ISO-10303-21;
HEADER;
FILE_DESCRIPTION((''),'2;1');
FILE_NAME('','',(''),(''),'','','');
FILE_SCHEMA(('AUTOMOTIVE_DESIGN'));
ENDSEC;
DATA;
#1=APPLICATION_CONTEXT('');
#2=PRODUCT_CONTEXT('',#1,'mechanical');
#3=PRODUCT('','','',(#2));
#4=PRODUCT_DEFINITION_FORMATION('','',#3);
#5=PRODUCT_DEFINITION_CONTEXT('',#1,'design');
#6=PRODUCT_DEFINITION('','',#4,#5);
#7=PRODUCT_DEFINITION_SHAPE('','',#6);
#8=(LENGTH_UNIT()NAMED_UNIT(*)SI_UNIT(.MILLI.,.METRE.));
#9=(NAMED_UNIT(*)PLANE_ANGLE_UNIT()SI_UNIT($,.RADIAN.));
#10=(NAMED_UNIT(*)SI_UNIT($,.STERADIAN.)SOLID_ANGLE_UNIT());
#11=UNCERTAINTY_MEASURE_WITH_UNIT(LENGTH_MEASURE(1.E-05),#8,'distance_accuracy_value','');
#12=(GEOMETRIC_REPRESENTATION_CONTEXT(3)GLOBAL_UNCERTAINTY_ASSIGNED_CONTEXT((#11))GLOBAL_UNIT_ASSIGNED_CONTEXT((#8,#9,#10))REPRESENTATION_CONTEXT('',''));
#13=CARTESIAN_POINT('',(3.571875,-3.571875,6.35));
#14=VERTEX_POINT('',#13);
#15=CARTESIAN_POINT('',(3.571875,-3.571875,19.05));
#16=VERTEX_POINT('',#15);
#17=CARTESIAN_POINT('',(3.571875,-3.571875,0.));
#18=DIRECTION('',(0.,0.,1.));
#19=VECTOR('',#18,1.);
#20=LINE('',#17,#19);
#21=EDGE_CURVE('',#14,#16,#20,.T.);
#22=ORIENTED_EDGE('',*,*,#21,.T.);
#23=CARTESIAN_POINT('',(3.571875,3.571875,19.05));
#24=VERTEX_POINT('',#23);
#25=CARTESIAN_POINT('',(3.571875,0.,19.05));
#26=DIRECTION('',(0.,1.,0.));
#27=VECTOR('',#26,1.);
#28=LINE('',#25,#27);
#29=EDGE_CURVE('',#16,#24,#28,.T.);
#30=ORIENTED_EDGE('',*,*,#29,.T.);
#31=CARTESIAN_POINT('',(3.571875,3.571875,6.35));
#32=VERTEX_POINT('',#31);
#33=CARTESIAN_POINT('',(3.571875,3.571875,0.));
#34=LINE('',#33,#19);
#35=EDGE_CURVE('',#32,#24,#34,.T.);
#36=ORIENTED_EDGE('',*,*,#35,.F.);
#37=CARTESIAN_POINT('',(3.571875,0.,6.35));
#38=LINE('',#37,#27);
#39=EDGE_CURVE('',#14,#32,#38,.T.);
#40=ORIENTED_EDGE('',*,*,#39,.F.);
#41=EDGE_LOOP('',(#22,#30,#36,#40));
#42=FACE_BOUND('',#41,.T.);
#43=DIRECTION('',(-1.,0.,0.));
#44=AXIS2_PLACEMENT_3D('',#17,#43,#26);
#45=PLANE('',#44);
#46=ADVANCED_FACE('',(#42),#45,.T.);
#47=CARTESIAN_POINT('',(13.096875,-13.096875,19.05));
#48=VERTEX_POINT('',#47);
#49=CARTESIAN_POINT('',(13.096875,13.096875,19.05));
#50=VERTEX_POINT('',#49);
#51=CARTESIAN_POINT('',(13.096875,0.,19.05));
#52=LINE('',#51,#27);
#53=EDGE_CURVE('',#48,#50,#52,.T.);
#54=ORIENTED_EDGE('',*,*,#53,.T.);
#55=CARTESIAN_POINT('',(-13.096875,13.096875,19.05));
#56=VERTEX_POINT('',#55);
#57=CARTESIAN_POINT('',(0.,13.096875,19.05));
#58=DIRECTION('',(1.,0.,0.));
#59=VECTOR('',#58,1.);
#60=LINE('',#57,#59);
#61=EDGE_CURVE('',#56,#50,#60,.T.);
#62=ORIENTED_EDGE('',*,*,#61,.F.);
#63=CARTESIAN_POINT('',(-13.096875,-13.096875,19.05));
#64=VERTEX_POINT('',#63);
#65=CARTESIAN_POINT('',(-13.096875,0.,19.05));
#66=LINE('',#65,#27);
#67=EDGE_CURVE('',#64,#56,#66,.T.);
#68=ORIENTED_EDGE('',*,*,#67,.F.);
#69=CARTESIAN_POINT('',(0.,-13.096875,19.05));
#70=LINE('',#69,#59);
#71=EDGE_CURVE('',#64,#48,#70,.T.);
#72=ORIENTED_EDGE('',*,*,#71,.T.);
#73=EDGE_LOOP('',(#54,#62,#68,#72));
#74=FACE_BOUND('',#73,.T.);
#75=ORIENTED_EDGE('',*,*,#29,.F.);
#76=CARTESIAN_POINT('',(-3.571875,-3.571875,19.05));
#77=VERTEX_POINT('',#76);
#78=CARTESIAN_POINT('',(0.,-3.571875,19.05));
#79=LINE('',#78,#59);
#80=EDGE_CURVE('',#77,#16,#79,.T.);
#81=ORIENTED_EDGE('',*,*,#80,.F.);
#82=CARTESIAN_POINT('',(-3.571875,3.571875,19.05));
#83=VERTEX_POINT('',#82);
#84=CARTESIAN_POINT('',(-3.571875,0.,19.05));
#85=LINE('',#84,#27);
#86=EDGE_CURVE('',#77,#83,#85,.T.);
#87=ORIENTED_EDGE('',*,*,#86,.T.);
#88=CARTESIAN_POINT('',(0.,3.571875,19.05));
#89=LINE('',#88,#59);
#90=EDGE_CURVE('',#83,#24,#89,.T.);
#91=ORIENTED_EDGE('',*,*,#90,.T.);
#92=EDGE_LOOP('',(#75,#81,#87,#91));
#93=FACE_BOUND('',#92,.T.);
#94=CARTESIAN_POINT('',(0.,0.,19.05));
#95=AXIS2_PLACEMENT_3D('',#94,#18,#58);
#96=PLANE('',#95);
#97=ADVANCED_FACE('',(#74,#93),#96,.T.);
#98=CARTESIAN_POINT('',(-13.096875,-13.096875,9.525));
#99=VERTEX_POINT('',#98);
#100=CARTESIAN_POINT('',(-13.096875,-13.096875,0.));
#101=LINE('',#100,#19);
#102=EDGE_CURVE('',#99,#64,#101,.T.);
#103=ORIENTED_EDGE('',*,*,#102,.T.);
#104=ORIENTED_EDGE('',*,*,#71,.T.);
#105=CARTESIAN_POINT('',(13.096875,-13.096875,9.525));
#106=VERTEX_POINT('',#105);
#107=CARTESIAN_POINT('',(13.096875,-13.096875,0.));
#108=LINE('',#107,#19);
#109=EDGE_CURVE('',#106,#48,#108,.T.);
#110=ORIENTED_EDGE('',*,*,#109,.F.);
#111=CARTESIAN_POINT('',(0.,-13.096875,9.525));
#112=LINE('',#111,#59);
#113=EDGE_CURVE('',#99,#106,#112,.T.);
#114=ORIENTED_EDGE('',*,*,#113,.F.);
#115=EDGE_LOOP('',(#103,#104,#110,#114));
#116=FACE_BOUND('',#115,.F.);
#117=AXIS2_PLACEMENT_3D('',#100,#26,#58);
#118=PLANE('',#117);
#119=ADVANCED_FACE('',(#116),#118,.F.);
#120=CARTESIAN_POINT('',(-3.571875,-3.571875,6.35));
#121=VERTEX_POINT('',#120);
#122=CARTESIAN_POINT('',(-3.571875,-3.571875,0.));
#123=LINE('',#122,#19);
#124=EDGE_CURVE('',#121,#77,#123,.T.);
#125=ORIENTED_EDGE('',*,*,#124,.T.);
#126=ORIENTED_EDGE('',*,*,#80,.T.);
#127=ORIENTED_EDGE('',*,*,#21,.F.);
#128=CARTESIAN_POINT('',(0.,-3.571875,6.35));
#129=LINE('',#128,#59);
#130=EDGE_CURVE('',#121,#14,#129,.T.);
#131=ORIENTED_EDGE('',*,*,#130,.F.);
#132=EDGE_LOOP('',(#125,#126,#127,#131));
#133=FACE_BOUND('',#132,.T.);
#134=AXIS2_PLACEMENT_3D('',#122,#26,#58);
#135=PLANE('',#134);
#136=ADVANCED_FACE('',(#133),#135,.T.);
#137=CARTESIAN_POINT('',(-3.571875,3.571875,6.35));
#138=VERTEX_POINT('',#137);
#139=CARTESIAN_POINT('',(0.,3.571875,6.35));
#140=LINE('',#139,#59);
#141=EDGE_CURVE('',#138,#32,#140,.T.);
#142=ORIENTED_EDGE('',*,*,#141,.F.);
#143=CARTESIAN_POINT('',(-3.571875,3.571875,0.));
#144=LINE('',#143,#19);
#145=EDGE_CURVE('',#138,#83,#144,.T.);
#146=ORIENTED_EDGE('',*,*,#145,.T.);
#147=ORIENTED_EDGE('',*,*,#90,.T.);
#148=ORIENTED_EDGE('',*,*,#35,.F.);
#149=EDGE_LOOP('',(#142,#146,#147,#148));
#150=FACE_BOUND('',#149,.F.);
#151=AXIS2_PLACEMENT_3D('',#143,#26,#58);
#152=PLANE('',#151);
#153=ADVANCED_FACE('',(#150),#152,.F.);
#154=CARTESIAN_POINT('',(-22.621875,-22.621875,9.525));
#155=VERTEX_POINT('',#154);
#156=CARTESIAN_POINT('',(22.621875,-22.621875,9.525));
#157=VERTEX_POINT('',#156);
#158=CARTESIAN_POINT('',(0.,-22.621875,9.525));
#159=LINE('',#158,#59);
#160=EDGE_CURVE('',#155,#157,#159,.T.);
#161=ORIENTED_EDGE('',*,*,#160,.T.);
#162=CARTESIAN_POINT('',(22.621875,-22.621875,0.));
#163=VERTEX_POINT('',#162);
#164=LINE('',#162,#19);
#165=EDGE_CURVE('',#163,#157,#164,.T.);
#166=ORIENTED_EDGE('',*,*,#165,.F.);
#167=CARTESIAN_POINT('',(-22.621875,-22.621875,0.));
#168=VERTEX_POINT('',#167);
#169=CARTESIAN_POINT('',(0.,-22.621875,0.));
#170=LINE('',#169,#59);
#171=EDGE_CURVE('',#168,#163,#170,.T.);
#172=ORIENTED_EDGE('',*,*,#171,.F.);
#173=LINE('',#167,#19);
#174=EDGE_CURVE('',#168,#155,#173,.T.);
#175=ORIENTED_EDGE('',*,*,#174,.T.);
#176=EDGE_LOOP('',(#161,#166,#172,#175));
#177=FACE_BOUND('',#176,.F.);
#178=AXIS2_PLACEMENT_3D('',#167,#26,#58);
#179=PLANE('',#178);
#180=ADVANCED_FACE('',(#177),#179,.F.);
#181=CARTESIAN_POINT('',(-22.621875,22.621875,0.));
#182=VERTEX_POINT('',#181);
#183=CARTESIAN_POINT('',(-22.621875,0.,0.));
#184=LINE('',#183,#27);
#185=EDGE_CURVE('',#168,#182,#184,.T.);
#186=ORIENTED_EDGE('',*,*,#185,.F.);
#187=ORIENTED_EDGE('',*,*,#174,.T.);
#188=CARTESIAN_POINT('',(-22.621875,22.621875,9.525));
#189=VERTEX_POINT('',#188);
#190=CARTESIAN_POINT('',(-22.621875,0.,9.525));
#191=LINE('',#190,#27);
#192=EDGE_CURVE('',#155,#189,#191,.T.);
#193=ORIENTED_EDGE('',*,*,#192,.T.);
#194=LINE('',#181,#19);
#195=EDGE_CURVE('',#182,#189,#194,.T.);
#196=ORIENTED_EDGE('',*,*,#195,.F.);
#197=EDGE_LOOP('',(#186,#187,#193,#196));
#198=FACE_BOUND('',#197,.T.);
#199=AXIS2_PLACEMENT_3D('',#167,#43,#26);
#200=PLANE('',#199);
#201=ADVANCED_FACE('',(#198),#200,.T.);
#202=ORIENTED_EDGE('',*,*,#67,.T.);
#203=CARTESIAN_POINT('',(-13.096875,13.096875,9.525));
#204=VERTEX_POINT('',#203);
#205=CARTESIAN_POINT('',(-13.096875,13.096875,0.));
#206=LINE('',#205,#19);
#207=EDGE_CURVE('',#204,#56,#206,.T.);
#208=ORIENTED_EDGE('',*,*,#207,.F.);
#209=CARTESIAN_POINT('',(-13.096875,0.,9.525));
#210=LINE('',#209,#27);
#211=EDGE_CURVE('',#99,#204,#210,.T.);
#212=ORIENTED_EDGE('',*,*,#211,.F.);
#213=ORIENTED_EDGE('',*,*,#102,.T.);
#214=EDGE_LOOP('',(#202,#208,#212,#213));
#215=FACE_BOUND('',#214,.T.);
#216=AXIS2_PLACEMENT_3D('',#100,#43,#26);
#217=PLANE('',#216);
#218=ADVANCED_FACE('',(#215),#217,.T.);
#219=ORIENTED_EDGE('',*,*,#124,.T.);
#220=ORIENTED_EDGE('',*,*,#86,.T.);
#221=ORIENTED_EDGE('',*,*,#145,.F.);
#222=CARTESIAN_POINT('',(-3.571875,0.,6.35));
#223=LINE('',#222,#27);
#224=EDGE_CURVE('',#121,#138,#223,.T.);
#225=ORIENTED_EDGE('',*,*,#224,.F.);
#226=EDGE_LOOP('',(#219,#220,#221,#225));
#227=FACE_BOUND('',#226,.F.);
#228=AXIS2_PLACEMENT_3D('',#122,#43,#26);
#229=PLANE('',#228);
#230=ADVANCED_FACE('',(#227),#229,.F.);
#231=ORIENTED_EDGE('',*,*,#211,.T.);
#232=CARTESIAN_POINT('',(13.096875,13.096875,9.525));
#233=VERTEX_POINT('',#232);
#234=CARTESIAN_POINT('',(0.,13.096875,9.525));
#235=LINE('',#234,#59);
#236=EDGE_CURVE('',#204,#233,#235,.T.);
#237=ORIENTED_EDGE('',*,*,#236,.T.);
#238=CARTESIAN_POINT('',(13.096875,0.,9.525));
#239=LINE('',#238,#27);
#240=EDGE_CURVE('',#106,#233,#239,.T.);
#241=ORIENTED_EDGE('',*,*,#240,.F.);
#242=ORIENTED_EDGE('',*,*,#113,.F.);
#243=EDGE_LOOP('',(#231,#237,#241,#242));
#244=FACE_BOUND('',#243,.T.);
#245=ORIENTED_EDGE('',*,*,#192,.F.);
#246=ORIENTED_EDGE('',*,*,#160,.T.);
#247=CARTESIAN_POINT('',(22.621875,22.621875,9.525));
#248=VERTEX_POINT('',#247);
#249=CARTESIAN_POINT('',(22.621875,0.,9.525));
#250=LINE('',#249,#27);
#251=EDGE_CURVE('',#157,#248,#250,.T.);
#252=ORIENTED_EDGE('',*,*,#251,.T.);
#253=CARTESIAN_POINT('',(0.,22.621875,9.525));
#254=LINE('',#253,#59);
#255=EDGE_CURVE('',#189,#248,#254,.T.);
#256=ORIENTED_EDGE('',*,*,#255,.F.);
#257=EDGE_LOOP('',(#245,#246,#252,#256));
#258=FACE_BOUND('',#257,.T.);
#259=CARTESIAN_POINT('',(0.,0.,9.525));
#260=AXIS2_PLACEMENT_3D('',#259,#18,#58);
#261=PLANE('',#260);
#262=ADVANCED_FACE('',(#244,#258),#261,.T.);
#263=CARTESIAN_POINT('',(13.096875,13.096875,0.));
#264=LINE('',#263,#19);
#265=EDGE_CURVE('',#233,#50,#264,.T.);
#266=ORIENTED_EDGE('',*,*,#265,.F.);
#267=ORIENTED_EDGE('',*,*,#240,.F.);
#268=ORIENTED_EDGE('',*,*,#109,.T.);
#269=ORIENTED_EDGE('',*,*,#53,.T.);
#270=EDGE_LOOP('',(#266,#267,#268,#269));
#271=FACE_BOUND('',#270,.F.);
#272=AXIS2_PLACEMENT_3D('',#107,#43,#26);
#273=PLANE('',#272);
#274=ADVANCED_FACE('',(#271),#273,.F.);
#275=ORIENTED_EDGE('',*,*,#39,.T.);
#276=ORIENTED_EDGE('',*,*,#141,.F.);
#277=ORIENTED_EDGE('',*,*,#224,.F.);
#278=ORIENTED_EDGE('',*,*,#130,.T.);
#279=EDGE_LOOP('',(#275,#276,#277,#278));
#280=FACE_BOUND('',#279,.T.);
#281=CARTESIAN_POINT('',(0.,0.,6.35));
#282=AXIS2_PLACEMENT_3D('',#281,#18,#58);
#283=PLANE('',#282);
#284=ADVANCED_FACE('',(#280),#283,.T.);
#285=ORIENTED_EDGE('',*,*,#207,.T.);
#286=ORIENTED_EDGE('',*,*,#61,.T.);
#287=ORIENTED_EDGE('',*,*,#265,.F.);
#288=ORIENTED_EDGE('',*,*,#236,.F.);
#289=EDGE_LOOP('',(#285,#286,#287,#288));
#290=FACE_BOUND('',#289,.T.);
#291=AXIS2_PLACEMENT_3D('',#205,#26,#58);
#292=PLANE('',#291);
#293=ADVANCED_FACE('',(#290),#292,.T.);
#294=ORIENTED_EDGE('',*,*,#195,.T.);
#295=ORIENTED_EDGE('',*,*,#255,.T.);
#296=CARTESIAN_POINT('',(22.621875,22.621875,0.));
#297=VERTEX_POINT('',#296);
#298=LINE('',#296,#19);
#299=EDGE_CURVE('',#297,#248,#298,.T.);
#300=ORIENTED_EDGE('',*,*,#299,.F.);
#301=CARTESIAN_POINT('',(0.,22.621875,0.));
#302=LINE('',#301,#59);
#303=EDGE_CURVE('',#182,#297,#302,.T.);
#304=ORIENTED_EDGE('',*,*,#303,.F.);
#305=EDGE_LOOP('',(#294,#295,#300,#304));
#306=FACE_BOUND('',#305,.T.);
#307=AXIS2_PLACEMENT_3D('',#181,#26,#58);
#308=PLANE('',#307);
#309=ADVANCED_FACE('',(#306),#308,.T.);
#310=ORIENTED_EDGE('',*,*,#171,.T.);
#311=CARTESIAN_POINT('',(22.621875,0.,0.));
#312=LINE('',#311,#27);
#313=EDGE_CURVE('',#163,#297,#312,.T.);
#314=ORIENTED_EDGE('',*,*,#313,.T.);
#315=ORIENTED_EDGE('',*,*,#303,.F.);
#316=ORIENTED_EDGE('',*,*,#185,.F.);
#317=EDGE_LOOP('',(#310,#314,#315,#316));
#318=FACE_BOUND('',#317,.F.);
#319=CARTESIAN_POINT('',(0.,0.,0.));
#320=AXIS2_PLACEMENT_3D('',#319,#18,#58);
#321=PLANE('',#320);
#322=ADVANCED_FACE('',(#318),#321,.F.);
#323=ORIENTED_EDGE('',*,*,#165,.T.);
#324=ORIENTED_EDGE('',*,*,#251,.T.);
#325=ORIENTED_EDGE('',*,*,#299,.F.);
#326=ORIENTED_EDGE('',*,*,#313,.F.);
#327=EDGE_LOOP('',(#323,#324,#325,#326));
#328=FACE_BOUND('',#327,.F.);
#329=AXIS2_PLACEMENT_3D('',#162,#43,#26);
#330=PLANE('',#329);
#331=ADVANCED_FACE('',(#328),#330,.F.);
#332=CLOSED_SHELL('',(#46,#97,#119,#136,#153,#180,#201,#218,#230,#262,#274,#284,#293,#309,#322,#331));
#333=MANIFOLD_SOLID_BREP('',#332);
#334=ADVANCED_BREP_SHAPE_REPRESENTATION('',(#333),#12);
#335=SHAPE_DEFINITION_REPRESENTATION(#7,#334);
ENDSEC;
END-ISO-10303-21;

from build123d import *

# Parameters (mm, degrees)
F0_W     = 45.24375
F0_H     = 45.24375
F0_W_2   = 26.19375
F0_H_2   = 26.19375
F1_DEPTH = 9.525
F0_W_3   = 7.14375
F0_H_3   = 7.14375
F2_DEPTH = 19.05
F3_DEPTH = 6.35


# Not quite as in the source:
# - a length typed as a fraction of an inch, garbled in the dataset ("3 / 203.2 mm" for 3/8 in), is restored


with BuildPart() as f1:
    # F0 (on Top) → F1 (new body)
    with BuildSketch(Plane.XY):
        Rectangle(F0_W, F0_H)
        Rectangle(F0_W_2, F0_H_2, mode=Mode.SUBTRACT)
    extrude(amount=F1_DEPTH)

    # F0 (on Top) → F2 (join)
    with BuildSketch(Plane.XY):
        Rectangle(F0_W_2, F0_H_2)
        Rectangle(F0_W_3, F0_H_3, mode=Mode.SUBTRACT)
    extrude(amount=F2_DEPTH)

    # F0 (on Top) → F3 (join)
    with BuildSketch(Plane.XY):
        Rectangle(F0_W_3, F0_H_3)
    extrude(amount=F3_DEPTH)


solid = f1.part
